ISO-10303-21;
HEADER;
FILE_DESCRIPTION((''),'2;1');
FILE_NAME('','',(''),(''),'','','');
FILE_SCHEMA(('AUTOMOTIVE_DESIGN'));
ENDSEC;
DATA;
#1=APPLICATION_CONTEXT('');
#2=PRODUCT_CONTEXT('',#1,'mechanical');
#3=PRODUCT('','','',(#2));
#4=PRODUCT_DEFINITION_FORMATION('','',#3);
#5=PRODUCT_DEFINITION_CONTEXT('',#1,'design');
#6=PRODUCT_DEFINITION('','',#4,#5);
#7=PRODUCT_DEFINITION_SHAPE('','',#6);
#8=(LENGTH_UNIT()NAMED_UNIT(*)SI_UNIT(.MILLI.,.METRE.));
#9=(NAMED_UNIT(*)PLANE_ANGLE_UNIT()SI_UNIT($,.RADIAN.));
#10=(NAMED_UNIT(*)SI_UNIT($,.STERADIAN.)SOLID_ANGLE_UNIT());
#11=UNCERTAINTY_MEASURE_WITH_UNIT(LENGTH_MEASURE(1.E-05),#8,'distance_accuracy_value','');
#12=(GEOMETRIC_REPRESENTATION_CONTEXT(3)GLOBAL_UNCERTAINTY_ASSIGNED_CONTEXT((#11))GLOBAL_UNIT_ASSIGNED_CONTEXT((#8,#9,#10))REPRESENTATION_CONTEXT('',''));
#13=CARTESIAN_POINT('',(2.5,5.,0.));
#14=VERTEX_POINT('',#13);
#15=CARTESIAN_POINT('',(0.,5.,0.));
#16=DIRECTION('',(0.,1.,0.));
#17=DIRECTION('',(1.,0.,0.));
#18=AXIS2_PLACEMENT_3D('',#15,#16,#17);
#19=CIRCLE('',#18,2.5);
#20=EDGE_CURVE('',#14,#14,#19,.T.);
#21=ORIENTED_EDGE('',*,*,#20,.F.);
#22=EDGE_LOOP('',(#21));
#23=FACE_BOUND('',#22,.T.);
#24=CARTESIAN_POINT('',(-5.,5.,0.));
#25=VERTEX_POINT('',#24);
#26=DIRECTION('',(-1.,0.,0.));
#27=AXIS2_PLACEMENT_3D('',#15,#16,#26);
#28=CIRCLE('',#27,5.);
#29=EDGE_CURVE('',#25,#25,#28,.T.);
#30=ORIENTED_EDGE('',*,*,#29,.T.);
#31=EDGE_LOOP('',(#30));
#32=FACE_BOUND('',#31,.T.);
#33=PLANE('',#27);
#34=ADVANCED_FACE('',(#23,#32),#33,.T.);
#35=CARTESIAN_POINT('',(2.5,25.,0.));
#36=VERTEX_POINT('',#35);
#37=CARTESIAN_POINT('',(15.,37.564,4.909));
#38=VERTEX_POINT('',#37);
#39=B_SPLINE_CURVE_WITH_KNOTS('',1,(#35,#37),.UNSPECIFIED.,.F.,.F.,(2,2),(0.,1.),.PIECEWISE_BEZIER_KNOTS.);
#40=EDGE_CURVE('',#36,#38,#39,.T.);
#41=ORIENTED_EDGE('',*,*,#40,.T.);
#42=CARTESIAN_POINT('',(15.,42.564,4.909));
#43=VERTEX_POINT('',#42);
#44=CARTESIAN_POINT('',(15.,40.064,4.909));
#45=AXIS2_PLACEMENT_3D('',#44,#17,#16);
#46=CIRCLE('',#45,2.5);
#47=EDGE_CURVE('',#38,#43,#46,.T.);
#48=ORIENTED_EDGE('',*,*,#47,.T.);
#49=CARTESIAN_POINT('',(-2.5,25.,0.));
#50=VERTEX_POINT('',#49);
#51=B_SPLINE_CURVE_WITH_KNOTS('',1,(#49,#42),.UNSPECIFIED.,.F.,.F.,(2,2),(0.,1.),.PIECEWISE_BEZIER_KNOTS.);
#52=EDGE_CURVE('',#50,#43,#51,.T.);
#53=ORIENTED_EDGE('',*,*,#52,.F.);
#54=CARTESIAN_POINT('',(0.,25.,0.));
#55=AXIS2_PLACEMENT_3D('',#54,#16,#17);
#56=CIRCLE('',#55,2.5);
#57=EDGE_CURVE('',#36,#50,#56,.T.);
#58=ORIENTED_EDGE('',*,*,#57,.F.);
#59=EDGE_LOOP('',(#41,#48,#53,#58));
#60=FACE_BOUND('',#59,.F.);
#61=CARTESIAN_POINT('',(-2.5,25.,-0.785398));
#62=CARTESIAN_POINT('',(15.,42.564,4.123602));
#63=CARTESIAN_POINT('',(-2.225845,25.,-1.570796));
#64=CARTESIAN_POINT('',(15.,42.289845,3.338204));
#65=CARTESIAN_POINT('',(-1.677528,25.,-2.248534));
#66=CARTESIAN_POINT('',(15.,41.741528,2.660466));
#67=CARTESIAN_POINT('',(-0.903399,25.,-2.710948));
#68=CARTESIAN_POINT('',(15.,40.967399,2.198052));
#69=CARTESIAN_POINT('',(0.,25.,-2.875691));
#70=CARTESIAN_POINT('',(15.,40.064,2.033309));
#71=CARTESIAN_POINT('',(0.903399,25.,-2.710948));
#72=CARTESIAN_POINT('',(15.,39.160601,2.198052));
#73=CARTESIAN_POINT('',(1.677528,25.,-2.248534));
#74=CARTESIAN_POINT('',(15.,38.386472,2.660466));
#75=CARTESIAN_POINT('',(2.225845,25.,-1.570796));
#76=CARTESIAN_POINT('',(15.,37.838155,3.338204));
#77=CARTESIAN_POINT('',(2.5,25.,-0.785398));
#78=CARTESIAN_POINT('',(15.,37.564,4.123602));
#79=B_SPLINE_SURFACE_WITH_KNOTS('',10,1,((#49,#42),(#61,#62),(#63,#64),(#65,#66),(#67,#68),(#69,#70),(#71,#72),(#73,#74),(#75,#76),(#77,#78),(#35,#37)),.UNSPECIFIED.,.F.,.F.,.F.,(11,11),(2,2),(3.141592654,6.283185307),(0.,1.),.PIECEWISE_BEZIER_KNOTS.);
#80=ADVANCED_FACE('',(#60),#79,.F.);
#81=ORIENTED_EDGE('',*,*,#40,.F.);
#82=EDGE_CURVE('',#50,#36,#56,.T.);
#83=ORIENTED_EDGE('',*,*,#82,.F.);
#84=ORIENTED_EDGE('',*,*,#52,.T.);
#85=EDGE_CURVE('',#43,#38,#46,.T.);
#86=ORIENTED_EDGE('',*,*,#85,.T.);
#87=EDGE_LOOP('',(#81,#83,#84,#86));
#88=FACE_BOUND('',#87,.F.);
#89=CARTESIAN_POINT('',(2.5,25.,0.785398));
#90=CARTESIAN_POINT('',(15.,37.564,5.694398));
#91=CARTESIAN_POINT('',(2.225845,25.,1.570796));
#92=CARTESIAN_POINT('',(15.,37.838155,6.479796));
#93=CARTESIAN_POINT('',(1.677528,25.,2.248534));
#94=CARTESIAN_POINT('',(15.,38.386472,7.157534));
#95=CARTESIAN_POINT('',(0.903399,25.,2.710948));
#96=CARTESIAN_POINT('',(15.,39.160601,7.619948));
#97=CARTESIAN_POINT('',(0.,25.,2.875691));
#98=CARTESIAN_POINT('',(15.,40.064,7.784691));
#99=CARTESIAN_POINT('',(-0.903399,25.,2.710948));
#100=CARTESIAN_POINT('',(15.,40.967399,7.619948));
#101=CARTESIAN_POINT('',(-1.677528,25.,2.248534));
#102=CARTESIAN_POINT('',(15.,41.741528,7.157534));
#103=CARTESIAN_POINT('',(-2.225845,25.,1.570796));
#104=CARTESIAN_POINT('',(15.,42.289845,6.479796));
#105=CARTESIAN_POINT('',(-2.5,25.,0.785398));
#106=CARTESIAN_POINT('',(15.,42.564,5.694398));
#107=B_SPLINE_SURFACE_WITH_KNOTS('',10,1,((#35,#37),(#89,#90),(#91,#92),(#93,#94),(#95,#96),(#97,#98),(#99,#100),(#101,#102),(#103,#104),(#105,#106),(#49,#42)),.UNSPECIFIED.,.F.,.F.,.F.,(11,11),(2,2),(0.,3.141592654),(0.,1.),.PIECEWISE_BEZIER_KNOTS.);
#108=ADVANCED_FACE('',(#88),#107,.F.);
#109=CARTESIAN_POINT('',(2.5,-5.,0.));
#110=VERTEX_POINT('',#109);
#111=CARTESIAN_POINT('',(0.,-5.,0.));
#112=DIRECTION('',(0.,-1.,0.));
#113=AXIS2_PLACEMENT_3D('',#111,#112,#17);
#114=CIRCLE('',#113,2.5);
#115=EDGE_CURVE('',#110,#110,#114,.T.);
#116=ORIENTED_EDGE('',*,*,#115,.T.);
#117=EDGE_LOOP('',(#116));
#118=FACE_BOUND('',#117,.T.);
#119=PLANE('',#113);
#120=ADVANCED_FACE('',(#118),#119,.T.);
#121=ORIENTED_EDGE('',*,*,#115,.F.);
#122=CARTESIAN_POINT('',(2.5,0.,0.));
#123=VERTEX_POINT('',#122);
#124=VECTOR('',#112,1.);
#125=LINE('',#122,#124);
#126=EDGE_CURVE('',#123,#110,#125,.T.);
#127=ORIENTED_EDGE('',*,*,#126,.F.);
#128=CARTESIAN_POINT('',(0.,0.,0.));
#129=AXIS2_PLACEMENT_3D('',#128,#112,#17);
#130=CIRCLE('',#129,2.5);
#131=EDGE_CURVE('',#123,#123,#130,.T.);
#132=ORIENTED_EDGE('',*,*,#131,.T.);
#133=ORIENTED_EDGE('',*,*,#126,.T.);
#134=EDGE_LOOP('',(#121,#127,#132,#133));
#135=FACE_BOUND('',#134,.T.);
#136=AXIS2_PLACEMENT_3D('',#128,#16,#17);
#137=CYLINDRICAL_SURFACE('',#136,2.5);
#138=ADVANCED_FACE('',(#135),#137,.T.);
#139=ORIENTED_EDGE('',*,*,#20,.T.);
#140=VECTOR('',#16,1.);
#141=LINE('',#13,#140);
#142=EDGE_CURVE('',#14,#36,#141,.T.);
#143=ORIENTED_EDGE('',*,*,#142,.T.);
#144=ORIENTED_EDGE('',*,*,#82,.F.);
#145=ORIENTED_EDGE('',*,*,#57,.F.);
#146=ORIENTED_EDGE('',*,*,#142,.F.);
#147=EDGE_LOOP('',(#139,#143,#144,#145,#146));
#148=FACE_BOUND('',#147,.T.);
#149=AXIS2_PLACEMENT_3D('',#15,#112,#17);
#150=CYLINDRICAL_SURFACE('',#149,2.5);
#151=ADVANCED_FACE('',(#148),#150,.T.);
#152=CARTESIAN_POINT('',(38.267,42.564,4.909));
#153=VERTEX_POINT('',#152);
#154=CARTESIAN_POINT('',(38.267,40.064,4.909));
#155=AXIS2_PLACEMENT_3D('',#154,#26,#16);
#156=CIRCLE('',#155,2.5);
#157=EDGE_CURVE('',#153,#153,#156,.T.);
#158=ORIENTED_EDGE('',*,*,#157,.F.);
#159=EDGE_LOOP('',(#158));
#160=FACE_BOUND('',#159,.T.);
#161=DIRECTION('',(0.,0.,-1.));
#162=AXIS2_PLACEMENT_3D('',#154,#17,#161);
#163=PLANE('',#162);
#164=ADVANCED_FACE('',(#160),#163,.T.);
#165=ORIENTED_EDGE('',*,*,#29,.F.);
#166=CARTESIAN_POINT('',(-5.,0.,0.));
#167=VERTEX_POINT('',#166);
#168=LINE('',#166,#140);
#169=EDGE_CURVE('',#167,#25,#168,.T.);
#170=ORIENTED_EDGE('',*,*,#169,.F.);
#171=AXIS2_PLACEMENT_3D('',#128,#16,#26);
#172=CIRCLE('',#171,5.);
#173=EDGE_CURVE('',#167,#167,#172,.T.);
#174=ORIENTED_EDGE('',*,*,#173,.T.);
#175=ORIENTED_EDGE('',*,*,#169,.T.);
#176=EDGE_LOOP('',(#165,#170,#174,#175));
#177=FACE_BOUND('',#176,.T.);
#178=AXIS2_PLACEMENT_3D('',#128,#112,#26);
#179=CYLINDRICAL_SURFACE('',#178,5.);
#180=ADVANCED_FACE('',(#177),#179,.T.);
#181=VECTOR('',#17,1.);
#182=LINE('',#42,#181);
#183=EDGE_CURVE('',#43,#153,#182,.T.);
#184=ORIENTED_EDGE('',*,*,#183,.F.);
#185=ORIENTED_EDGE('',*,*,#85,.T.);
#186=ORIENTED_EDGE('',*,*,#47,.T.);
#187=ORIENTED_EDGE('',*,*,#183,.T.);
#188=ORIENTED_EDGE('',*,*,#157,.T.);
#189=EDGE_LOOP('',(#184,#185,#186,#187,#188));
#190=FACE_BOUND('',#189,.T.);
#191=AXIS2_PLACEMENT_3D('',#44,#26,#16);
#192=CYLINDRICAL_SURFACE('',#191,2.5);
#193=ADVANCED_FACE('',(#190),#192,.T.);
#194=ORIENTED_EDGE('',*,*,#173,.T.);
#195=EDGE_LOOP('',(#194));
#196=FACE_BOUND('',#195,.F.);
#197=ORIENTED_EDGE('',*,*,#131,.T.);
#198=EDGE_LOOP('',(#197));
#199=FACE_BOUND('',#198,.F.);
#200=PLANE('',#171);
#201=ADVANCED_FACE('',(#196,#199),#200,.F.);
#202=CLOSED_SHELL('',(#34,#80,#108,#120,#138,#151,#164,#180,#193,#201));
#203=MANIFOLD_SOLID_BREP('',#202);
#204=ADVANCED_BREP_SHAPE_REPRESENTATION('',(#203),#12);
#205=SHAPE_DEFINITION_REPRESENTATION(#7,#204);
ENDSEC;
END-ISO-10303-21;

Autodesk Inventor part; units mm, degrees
ref_plane "XZ Plane" through (0, 0, 0) normal (0, 1, 0) x (-1, 0, 0)
ref_plane "XY Plane" through (0, 0, 0) normal (0, 0, 1) x (1, 0, 0)
sketch "Sketch1" plane through (0, 0, 0) normal (0, 1, 0) x (-1, 0, 0)
  circle A0 centre (0, 0) radius 5
  dimension "d0" = 10
extrude "Extrusion1" add sketch "Sketch1" along normal blind 5
sketch "Sketch2" plane through (0, 0, 0) normal (0, -1, 0) x (1, 0, 0)
  circle A0 centre (0, 0) radius 2.5
  dimension "d3" = 5
extrude "Extrusion2" add sketch "Sketch2" along normal blind 5
sketch "Sketch3" plane through (0, 5, 0) normal (0, 1, 0) x (1, 0, 0)
  circle A0 centre (0, 0) radius 2.5
  dimension "d6" = 5
extrude "Extrusion3" add sketch "Sketch3" along normal blind 20
ref_plane "Work Plane1" through (15, 0, 0) normal (1, 0, 0) x (0, 1, 0)
sketch "Sketch6" plane through (15, 0, 0) normal (1, 0, 0) x (0, 1, 0)
  line L0 (25, -2.5) -> (25, 2.5) projected
  line L1 (25, 0) -> (40.064, 0)
  line L2 (40.064, 0) -> (40.064, 4.909)
  circle A0 centre (40.064, 4.909) radius 2.5
  point P0 (0, 0)
  dimension "d28" = 15.064
  dimension "d29" = 4.909
  dimension "d30" = 5
extrude "Extrusion6" add sketch "Sketch6" along normal blind 25
loft "Loft3" add section 1 edges at (-2.5, 25, 0) section 2 edges at (15, 37.564, 4.909)
sketch "Sketch7" plane through (40, 40.064, 4.909) normal (1, 0, 0) x (0, 0, -1)
  circle A0 centre (0, 0) radius 2.5
  point P0 (4.909, -40.064)
  dimension "d37" = 5
extrude "Extrusion7" cut sketch "Sketch7" against normal blind 1.733
properties part number "gud gear stand proto 1 2"
